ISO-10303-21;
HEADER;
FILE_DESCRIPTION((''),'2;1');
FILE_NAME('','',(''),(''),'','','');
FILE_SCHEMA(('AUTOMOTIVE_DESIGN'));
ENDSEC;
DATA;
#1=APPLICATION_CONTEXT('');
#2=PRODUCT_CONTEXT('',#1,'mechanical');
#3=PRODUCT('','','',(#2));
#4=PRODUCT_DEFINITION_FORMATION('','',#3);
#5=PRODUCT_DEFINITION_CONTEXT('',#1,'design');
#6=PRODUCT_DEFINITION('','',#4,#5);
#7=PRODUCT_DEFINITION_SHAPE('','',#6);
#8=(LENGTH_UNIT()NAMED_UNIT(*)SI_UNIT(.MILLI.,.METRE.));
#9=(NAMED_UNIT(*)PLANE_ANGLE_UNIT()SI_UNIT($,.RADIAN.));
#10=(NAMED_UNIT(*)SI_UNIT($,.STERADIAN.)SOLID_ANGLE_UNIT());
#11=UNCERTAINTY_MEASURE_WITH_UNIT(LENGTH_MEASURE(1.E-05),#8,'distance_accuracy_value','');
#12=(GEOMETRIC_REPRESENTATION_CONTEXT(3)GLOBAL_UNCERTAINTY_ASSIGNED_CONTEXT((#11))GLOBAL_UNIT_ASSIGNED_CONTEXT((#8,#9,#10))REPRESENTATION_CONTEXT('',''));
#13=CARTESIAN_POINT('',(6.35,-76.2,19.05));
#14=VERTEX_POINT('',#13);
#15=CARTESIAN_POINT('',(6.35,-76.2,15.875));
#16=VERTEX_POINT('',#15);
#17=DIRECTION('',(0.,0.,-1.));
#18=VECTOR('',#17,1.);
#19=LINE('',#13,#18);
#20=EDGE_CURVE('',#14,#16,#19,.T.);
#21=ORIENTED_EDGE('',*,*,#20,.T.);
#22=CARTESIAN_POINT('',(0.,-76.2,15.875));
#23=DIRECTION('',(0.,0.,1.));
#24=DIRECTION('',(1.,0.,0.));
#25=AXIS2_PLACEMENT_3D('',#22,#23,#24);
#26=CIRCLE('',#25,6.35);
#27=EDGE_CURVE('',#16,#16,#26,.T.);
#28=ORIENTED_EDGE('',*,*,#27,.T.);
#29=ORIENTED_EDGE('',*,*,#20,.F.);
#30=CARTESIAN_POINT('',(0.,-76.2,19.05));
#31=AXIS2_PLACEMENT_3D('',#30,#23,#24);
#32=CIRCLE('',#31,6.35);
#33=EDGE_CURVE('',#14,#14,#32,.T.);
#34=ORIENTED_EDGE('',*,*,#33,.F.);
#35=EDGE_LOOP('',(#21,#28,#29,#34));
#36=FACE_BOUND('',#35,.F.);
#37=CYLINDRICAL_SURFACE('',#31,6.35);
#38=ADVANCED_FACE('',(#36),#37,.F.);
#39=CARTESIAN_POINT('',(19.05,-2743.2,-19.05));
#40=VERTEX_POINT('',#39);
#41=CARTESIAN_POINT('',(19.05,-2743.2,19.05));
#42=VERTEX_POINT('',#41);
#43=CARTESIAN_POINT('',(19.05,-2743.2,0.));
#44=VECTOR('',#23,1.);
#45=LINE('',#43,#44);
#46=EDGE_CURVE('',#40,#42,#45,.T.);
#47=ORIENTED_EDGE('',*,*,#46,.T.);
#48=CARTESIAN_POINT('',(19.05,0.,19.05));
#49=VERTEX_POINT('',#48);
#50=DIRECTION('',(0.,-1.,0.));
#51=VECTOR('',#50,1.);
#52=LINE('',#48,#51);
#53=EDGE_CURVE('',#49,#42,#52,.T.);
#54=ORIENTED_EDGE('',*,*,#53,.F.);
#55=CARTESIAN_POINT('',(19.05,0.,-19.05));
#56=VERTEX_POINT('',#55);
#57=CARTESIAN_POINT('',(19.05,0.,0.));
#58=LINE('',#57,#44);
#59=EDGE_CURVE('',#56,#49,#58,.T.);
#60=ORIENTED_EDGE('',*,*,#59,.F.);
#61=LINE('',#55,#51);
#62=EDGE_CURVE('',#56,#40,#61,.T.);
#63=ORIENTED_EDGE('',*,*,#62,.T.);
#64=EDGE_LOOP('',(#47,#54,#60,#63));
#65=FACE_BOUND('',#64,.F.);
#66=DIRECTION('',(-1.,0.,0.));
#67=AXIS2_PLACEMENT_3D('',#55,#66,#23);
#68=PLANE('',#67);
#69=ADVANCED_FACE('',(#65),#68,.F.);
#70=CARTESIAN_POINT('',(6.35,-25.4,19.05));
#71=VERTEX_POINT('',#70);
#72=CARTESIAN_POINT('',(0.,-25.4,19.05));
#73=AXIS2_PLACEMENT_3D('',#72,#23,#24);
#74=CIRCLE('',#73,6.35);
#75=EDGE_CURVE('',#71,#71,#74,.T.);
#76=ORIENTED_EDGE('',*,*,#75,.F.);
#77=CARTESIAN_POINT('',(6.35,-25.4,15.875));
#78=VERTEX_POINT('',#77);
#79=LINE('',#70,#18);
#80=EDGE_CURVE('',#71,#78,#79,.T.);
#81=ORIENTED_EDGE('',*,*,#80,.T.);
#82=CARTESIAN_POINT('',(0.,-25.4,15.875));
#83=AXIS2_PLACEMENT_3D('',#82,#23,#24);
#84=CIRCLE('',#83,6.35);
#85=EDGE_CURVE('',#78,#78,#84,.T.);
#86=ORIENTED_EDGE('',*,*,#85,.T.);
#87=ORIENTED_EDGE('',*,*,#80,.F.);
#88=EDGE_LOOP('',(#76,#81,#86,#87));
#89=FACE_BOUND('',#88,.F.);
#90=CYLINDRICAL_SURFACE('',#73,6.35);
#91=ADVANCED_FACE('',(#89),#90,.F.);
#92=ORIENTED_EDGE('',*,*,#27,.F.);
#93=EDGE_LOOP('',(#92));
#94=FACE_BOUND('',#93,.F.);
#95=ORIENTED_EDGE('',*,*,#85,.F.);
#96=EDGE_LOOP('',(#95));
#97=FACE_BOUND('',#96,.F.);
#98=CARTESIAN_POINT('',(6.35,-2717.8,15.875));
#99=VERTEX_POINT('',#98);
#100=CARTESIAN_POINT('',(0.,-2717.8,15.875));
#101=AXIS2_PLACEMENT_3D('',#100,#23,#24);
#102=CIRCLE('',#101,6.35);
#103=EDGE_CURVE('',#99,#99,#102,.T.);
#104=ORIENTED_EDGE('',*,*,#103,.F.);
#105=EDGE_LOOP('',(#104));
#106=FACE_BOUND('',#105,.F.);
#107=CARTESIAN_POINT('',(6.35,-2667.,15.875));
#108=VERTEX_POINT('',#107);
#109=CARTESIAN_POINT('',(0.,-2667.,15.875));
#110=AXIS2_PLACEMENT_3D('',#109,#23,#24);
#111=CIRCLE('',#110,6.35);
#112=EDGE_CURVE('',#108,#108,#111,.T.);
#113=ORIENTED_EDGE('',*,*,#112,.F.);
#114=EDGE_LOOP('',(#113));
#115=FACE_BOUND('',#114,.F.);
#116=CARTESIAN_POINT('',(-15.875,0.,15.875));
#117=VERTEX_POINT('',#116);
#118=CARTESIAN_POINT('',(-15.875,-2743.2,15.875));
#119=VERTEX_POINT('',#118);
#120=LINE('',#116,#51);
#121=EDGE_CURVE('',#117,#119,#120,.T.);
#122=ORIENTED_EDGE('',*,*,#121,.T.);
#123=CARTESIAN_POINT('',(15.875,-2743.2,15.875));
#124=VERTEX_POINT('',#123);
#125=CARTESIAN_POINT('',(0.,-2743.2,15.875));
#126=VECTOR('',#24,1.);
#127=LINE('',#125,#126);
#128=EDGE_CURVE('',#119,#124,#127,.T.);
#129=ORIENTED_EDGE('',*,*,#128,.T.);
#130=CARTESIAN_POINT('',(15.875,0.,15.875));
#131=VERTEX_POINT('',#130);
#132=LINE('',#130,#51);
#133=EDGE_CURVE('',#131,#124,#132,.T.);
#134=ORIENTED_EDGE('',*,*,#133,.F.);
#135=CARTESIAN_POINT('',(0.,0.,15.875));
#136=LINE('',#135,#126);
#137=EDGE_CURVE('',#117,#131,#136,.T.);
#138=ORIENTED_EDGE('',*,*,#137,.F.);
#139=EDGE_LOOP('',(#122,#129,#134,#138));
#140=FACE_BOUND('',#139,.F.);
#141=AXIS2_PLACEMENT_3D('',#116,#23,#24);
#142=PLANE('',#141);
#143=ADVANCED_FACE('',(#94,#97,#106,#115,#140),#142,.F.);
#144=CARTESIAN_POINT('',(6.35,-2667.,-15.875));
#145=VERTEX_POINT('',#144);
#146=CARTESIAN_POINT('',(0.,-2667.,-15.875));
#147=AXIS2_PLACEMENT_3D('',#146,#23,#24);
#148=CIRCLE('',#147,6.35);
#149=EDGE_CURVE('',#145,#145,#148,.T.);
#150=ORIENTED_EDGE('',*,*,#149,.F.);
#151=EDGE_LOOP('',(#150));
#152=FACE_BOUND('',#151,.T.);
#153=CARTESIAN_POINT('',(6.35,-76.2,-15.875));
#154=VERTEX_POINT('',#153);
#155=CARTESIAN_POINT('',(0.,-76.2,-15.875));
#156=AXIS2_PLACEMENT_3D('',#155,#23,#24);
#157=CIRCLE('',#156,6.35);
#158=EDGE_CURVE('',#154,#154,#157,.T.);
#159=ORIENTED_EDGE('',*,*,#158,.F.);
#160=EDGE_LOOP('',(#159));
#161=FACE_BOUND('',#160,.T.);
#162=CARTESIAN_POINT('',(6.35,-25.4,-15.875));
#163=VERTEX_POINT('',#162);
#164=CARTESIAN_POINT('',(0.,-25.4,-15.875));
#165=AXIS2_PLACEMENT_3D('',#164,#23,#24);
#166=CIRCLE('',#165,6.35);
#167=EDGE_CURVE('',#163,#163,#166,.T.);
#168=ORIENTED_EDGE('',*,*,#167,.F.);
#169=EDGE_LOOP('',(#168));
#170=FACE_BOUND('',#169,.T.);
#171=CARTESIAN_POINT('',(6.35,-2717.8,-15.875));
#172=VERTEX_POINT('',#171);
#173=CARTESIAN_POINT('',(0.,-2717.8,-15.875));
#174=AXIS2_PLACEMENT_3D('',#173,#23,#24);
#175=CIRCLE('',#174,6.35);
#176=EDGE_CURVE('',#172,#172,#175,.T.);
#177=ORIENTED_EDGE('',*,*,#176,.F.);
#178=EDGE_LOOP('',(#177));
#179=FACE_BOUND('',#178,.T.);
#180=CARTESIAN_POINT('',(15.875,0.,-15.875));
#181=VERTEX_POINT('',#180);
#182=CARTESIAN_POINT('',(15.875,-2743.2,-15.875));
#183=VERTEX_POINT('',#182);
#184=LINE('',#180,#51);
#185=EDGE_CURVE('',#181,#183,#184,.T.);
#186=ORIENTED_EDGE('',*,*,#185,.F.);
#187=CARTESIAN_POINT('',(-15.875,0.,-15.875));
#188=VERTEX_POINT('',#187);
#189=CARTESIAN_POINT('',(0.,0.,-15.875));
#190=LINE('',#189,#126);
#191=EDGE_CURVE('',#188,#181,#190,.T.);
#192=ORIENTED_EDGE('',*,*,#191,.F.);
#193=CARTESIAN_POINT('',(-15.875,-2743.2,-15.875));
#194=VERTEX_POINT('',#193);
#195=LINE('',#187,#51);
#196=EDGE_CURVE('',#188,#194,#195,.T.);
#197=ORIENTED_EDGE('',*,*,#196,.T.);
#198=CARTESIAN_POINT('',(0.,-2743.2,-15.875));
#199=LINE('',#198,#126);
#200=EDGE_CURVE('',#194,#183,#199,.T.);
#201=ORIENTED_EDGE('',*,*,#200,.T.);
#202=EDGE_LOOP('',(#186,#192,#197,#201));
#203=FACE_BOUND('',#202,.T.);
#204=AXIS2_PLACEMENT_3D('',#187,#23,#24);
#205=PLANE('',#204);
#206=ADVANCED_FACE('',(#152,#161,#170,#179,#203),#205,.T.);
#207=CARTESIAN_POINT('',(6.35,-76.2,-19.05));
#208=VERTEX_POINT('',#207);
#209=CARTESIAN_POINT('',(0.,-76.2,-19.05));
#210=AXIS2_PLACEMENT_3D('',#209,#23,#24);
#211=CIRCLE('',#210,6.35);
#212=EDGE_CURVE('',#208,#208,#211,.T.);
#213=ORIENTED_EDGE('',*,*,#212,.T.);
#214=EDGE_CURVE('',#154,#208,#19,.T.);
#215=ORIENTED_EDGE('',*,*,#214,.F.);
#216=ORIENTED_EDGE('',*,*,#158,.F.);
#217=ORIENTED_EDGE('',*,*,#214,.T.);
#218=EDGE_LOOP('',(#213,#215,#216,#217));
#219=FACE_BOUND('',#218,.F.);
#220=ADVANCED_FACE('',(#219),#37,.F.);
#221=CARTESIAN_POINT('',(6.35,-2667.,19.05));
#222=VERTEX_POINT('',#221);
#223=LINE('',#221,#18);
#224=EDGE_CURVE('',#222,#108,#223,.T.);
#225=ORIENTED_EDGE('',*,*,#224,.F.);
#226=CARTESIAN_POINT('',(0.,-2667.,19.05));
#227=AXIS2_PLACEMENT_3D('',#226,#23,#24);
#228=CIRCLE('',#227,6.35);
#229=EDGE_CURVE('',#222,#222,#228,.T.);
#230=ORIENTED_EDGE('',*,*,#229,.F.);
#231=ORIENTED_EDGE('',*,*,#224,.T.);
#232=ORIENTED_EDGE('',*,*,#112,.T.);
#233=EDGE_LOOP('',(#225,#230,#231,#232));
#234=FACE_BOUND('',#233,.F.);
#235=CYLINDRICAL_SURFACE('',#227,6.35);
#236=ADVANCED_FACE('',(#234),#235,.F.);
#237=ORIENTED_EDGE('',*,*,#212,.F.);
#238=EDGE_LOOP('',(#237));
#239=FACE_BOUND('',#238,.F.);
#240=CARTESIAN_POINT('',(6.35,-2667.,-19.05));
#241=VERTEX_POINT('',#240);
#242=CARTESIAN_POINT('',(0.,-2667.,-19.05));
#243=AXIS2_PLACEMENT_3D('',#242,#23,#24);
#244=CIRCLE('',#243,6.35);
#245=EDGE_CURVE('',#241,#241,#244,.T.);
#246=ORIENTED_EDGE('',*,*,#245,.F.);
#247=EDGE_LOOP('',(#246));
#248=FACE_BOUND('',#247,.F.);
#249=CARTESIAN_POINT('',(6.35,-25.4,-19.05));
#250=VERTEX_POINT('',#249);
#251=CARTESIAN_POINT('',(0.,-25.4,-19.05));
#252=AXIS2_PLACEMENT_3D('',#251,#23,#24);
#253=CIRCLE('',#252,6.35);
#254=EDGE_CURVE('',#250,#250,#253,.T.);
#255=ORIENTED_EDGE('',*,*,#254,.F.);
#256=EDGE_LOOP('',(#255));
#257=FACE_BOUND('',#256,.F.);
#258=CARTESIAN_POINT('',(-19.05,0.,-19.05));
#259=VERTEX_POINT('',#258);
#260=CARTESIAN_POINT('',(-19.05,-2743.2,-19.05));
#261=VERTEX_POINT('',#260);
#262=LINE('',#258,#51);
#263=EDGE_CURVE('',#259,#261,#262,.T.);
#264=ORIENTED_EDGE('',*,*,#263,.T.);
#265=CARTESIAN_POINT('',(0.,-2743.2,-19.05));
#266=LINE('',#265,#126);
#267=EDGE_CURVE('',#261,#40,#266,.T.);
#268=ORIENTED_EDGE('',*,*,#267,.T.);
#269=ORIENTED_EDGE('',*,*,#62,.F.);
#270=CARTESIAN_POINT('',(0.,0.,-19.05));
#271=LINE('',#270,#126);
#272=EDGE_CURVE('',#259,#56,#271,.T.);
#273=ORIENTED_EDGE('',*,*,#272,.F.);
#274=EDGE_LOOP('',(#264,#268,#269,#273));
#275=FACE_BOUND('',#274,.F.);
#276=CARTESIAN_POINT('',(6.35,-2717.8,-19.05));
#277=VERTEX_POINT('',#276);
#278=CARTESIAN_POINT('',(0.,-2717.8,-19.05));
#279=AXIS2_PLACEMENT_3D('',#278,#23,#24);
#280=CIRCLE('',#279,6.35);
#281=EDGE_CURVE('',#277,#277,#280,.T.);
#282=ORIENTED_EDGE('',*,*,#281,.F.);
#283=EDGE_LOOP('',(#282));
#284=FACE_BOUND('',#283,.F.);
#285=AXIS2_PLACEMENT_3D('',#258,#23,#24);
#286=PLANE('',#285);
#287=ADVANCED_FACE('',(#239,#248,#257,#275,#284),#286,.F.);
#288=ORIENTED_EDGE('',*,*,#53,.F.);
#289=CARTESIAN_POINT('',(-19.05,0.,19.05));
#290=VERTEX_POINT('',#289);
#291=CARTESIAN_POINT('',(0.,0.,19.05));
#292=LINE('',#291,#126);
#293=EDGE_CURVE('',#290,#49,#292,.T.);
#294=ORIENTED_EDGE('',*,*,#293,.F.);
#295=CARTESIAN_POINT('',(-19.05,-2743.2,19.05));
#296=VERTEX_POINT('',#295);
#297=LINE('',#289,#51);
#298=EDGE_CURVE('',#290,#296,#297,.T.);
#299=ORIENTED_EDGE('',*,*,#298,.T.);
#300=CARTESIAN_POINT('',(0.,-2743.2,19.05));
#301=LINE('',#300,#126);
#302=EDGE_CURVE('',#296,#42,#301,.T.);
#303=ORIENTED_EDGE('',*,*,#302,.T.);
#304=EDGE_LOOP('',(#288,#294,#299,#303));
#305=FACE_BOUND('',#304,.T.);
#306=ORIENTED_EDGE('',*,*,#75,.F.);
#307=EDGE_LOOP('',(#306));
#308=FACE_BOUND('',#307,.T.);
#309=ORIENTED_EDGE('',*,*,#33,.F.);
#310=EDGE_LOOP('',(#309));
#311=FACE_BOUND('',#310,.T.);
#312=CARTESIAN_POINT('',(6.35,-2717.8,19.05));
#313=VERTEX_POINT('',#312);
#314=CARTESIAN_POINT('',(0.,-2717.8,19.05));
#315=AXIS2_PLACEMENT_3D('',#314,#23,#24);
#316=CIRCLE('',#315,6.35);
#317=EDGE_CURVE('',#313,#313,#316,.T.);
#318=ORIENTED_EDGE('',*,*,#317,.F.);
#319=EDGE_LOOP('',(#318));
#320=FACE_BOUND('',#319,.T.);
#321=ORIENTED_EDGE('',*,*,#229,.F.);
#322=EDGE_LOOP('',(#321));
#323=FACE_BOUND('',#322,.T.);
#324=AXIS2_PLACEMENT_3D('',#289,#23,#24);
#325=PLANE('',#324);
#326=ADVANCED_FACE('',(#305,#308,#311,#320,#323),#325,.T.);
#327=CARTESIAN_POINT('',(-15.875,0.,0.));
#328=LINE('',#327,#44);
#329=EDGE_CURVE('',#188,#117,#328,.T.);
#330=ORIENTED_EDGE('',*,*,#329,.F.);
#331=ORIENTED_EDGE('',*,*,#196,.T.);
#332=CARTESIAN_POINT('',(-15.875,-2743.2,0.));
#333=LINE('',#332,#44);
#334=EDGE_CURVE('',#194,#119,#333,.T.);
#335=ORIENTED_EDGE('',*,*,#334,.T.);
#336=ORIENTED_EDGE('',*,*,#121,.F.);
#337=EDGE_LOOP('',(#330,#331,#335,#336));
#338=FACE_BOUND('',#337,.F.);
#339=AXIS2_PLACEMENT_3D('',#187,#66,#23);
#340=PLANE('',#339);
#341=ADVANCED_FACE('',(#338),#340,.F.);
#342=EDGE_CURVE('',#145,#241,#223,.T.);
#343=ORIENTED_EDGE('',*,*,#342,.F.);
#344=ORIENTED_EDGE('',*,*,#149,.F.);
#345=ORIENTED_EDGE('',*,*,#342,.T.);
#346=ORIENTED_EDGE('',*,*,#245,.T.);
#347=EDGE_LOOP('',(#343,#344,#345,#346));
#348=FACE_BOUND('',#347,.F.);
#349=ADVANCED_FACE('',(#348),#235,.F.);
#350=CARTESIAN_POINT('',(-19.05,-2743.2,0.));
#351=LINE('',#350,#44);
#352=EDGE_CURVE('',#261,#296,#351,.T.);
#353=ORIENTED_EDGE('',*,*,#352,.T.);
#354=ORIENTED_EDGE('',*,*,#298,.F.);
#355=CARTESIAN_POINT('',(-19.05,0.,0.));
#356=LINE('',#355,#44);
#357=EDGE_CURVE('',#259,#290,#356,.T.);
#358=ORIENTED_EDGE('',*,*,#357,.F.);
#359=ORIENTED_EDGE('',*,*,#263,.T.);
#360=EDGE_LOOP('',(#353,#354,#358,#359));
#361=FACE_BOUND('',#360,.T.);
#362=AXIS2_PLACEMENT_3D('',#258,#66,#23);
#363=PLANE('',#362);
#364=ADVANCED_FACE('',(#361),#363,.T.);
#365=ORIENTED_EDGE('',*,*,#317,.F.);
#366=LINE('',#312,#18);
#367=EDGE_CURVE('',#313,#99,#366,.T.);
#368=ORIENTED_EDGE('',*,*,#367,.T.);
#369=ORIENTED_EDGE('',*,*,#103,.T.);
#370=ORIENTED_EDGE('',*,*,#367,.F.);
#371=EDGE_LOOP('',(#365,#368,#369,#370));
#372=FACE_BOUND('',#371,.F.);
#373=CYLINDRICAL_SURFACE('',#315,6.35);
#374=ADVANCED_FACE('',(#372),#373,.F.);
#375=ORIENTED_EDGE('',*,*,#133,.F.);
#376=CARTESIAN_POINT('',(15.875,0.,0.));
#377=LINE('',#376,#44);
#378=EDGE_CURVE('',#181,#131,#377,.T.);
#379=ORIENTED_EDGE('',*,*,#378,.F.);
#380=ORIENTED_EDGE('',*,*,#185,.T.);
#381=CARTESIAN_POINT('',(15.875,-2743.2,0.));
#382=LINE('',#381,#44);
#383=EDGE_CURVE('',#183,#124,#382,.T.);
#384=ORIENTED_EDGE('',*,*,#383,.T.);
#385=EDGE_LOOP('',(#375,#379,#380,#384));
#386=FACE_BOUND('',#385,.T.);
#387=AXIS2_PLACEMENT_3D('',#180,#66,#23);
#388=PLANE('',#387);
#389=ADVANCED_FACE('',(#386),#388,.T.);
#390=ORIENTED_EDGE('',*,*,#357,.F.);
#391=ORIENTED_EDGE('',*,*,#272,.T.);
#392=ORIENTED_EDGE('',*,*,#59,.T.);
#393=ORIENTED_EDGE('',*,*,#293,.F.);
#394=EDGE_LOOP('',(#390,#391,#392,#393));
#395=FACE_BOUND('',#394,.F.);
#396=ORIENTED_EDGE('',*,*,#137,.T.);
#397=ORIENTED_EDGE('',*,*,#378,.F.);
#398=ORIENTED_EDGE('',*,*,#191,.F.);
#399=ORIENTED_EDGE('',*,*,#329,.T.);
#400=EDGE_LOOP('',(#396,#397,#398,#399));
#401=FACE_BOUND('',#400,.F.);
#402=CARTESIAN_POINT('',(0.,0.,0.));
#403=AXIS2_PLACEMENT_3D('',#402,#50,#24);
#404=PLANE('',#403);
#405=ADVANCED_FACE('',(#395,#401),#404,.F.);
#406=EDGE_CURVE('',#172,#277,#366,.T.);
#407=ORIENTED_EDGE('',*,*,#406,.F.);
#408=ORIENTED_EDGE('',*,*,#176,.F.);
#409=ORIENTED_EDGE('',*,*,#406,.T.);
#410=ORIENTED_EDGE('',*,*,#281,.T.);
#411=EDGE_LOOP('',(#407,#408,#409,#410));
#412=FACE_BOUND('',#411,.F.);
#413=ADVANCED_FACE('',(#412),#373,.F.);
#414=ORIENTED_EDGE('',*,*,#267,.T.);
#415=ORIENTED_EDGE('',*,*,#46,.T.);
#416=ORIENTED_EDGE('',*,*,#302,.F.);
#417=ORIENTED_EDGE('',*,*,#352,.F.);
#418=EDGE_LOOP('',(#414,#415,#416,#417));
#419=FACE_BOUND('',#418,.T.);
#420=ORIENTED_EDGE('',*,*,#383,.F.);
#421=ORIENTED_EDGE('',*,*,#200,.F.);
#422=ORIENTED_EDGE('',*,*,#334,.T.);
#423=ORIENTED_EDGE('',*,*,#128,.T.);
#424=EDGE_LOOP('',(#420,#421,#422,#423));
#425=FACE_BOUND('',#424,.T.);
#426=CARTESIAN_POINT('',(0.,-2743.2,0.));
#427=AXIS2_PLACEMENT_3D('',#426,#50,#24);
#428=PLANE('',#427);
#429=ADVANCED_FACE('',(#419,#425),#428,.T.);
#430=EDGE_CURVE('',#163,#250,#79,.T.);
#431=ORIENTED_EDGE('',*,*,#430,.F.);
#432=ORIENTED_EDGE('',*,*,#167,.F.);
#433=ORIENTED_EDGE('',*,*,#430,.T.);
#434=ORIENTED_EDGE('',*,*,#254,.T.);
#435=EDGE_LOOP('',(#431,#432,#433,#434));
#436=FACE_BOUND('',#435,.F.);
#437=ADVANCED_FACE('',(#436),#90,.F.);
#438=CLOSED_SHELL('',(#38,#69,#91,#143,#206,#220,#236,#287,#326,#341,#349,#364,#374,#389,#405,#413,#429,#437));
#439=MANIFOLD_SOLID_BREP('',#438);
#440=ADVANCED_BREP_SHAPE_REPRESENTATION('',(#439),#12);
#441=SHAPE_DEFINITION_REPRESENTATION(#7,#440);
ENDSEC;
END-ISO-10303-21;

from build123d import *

# Parameters (mm, degrees)
F0_W     = 38.1
F0_H     = 38.1
F0_W_2   = 31.75
F0_H_2   = 31.75
F1_DEPTH = 2743.2
F2_R     = 6.35
F3_DEPTH = 38.101


# Not quite as in the source:
# - a feature names something its author has since deleted; it is built from what else it names


with BuildPart() as f1:
    # F0 (on Front) → F1 (new body)
    with BuildSketch(Plane.XZ):
        Rectangle(F0_W, F0_H)
        Rectangle(F0_W_2, F0_H_2, mode=Mode.SUBTRACT)
    extrude(amount=F1_DEPTH)

    # F2 (on face) → F3 (cut, through all)
    with BuildSketch(Plane.XY.offset(19.05)):
        with Locations((0, -25.4)):
            Circle(F2_R)
        with Locations((0, -76.2)):
            Circle(F2_R)
        with Locations((0, -2717.8)):
            Circle(F2_R)
        with Locations((0, -2667)):
            Circle(F2_R)
    extrude(amount=-F3_DEPTH, mode=Mode.SUBTRACT)


solid = f1.part
